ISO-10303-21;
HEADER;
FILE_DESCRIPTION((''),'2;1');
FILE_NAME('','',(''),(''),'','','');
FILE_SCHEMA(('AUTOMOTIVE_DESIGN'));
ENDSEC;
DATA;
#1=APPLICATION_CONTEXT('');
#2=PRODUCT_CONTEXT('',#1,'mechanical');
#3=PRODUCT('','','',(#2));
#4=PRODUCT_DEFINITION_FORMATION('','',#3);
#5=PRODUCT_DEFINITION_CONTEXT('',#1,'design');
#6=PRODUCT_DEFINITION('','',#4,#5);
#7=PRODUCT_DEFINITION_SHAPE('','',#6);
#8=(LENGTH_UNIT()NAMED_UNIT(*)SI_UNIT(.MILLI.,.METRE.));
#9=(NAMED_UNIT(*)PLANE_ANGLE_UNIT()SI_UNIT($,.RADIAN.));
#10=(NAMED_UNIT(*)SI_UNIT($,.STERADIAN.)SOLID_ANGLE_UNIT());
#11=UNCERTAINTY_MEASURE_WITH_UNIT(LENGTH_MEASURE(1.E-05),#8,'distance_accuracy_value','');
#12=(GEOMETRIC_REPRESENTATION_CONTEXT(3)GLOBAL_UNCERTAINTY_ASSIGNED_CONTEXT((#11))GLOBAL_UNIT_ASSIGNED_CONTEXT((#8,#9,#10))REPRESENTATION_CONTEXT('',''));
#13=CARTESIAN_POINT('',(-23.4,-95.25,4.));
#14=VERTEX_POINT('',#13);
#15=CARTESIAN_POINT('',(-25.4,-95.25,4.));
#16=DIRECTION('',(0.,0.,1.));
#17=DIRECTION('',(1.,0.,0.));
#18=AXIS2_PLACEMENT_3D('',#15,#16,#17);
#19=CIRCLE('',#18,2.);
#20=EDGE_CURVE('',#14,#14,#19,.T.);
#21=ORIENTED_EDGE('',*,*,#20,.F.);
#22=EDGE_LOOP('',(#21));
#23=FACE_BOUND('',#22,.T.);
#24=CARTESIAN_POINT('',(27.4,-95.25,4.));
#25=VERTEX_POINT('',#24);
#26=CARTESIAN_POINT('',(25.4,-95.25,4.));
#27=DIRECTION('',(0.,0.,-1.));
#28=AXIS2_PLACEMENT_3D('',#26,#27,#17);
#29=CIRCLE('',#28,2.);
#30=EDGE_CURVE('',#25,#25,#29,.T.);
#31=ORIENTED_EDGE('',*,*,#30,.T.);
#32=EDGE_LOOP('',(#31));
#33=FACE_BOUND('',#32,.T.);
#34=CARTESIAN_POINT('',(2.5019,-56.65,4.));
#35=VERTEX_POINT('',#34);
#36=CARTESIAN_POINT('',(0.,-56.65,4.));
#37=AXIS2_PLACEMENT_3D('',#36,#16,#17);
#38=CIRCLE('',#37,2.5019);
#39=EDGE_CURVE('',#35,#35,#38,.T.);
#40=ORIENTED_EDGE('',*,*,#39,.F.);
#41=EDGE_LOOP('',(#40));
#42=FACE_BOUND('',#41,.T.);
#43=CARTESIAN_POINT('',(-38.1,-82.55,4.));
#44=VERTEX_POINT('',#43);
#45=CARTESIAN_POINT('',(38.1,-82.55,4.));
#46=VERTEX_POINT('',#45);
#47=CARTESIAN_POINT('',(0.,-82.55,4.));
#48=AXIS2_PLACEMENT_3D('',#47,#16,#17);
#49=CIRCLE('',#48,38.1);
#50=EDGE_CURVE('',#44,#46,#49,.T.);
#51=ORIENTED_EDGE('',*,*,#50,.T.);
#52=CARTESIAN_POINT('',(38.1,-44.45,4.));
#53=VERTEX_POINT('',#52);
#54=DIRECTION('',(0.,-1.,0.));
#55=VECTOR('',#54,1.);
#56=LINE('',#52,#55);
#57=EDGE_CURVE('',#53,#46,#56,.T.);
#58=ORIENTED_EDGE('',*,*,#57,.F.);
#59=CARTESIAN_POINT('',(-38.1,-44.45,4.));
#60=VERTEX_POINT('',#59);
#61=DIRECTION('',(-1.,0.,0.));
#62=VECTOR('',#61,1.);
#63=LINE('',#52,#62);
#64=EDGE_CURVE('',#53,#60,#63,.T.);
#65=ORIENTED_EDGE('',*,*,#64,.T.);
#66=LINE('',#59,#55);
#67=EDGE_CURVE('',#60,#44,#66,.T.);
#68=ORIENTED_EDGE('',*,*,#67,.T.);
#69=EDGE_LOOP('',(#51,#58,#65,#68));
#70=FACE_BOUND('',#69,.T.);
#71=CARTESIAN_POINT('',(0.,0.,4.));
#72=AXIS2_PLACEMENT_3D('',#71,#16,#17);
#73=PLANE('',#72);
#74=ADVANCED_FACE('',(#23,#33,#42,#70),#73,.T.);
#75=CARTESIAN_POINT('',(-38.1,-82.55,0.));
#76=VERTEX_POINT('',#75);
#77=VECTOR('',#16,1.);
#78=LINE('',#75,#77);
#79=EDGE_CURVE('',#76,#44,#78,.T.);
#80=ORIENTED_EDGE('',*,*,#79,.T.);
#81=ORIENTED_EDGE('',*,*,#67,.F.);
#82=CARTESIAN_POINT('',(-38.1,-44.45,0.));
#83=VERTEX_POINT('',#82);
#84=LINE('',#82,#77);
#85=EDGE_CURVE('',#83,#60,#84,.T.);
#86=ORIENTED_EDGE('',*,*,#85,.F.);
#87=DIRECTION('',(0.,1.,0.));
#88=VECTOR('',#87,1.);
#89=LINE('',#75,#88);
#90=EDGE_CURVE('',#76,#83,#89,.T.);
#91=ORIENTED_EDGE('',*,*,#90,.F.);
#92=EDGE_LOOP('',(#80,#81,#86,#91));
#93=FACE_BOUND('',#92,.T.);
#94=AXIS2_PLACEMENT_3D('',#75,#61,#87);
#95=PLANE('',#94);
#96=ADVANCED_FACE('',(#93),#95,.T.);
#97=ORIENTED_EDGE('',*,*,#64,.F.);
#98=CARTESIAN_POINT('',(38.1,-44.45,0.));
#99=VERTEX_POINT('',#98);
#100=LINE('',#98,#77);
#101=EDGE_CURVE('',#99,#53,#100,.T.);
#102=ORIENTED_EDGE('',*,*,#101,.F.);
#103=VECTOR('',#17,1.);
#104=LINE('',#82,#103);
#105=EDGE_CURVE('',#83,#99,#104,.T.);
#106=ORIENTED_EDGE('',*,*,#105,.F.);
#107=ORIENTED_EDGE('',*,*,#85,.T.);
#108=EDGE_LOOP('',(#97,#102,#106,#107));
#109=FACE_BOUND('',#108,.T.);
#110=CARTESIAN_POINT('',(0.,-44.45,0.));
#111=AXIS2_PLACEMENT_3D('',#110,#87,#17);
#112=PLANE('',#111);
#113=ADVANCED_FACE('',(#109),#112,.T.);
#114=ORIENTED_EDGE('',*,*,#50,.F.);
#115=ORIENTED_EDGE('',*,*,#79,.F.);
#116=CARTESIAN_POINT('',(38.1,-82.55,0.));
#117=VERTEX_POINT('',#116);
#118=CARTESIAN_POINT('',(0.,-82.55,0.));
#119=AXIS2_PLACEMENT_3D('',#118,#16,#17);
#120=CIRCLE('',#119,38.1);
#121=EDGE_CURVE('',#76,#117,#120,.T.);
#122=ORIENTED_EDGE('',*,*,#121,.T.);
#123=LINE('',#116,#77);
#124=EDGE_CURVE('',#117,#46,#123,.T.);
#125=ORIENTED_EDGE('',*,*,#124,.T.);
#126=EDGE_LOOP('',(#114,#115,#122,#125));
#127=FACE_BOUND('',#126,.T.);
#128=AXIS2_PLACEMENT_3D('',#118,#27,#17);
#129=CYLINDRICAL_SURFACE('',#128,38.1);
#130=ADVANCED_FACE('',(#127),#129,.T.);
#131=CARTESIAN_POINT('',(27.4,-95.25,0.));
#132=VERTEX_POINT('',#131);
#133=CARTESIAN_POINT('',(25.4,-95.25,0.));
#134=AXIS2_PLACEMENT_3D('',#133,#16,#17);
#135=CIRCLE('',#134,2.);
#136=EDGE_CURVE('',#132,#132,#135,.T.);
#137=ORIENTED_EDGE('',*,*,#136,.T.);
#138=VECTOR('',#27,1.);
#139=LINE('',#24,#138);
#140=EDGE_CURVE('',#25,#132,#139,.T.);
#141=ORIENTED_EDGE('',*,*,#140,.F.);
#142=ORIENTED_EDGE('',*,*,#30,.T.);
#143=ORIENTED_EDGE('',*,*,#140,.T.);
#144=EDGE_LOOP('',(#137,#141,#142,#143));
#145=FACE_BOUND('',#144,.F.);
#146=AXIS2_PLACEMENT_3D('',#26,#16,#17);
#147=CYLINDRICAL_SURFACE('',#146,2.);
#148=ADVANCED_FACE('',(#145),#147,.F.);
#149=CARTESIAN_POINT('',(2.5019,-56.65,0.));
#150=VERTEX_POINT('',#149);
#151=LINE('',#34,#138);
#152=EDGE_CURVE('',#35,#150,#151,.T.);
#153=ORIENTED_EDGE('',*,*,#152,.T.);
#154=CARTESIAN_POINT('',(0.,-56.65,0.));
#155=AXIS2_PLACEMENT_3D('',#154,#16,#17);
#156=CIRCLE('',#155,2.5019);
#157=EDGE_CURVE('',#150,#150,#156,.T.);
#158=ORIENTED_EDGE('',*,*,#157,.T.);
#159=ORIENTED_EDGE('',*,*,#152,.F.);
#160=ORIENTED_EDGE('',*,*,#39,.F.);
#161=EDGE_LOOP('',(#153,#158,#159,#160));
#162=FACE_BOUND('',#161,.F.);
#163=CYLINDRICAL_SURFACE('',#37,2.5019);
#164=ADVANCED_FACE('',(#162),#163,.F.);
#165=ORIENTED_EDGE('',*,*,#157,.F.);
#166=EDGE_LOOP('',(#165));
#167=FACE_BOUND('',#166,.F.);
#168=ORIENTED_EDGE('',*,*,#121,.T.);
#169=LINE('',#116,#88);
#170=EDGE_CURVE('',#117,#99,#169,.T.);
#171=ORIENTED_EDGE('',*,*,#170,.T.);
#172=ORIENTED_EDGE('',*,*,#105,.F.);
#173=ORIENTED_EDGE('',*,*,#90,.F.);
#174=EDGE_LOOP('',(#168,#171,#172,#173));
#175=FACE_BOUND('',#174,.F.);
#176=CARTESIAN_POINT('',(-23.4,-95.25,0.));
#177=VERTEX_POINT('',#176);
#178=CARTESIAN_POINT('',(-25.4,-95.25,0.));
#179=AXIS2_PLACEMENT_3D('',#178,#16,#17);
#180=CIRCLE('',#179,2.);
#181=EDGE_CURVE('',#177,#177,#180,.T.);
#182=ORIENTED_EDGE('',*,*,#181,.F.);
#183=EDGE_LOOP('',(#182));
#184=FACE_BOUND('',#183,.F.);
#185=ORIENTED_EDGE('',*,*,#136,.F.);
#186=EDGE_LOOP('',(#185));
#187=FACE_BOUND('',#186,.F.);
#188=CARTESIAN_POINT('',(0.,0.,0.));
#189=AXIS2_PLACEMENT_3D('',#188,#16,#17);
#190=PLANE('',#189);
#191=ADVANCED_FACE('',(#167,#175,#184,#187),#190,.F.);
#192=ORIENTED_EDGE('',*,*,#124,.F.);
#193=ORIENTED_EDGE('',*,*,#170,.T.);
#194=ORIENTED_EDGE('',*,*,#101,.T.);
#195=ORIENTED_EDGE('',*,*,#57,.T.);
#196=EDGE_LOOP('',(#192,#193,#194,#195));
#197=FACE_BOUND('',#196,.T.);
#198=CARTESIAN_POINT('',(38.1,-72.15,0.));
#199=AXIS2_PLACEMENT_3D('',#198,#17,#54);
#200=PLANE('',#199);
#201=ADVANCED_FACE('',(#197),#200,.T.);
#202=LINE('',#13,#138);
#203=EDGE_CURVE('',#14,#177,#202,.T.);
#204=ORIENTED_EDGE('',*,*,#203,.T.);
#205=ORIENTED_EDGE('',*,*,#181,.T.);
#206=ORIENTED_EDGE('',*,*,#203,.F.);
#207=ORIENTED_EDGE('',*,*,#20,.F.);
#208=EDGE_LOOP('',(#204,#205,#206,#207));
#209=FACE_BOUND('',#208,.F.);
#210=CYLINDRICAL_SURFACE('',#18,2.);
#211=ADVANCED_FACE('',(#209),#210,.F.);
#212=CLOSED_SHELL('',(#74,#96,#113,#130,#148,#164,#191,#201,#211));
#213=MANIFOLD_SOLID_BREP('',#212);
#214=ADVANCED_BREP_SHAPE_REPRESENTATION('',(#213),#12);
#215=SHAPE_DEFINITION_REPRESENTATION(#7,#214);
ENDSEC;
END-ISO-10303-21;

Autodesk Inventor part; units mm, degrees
ref_plane "YZ Plane" through (0, 0, 0) normal (1, 0, 0) x (0, 1, 0)
ref_plane "XZ Plane" through (0, 0, 0) normal (0, 1, 0) x (-1, 0, 0)
sketch "Sketch1" plane through (0, 0, 0) normal (0, 0, 1) x (1, 0, 0)
  line L0 (6.35, -214.55) -> (43.1, -214.55) projected
  line L1 (43.1, -214.55) -> (43.1, -189.15) projected
  line L2 (43.1, -189.15) -> (40.1028, -189.15) projected
  line L3 (40.1028, -189.15) -> (40.1028, -176.45) projected
  line L4 (40.1028, -176.45) -> (43.1, -176.45) projected
  line L5 (43.1, -176.45) -> (43.1, -110.25) projected
  line L6 (43.1, -110.25) -> (40.1028, -110.25) projected
  line L7 (40.1028, -110.25) -> (40.1028, -97.55) projected
  line L8 (40.1028, -97.55) -> (43.1, -97.55) projected
  line L9 (43.1, -97.55) -> (43.1, -72.15) projected
  line L10 (43.1, -72.15) -> (35.023, -72.15) projected
  arc A0 (-35.023, -72.15) -> (35.023, -72.15) centre (0, -57.15) ccw projected
  line L11 (-35.023, -72.15) -> (-43.1, -72.15) projected
  line L12 (-43.1, -72.15) -> (-43.1, -97.55) projected
  line L13 (-43.1, -97.55) -> (-40.1028, -97.55) projected
  line L14 (-40.1028, -97.55) -> (-40.1028, -110.25) projected
  line L15 (-40.1028, -110.25) -> (-43.1, -110.25) projected
  line L16 (-43.1, -110.25) -> (-43.1, -176.45) projected
  line L17 (-43.1, -176.45) -> (-40.1028, -176.45) projected
  line L18 (-40.1028, -176.45) -> (-40.1028, -189.15) projected
  line L19 (-40.1028, -189.15) -> (-43.1, -189.15) projected
  line L20 (-43.1, -189.15) -> (-43.1, -214.55) projected
  line L21 (-43.1, -214.55) -> (-6.35, -214.55) projected
  line L22 (-11.16, -143.04) -> (-11.16, -138.135) projected
  line L23 (-11.16, -138.135) -> (10.16, -138.135) projected
  line L24 (10.16, -138.135) -> (10.16, -168.265) projected
  line L25 (10.16, -168.265) -> (-11.16, -168.265) projected
  line L26 (-11.16, -168.265) -> (-11.16, -159.55) projected
  line L27 (-11.16, -159.55) -> (-19.058, -159.55) projected
  line L28 (-19.058, -159.55) -> (-19.058, -164.622) projected
  line L29 (-19.058, -164.622) -> (-22.598, -164.622) projected
  line L30 (-22.598, -164.622) -> (-22.598, -159.55) projected
  line L31 (-22.598, -159.55) -> (-32.258, -159.55) projected
  line L32 (-32.258, -159.55) -> (-32.258, -167.805) projected
  line L33 (-32.258, -167.805) -> (-34.29, -167.805) projected
  line L34 (-34.29, -167.805) -> (-34.29, -159.55) projected
  line L35 (-34.29, -159.55) -> (-38.1, -159.55) projected
  line L36 (-38.1, -159.55) -> (-38.1, -136.69) projected
  line L37 (-38.1, -136.69) -> (-22.598, -136.69) projected
  line L38 (-22.598, -136.69) -> (-22.598, -131.618) projected
  line L39 (-22.598, -131.618) -> (-19.058, -131.618) projected
  line L40 (-19.058, -131.618) -> (-19.058, -136.69) projected
  line L41 (-19.058, -136.69) -> (-15.24, -136.69) projected
  line L42 (-15.24, -136.69) -> (-15.24, -143.04) projected
  arc A1 (-38.1, -57.15) -> (38.1, -57.15) centre (0, -57.15) ccw projected
  line L43 (0, -57.15) -> (0, -82.55)
  circle A2 centre (0, -82.55) radius 38.1
  line L44 (38.1, -82.55) -> (-38.1, -82.55)
  line L45 (-38.1, -82.55) -> (-38.1, -44.45)
  line L46 (-38.1, -44.45) -> (38.1, -44.45)
  line L47 (38.1, -44.45) -> (38.1, -82.55)
  circle A3 centre (25.4, -95.25) radius 1.5 projected
  circle A4 centre (-25.4, -95.25) radius 1.5 projected
  line L48 (-15.24, -143.04) -> (-11.16, -143.04) projected
  line L49 (-6.35, -214.55) -> (-6.35, -203.8154) projected
  line L50 (-6.35, -203.8154) -> (6.35, -203.8154) projected
  line L51 (6.35, -203.8154) -> (6.35, -214.55) projected
  point P0 (0, 0)
  dimension "d1" = 76.2
  dimension "d0" = 25.4
extrude "Extrusion1" add sketch "Sketch1" along normal blind 4 contours L47 A2 L10 | L10 A2 A1 L47 | A2 L44 A0 L10 | L10 A1 A2 | A1 A2 L46 L47 | A2 L44 A0 | A0 L44 A1 A2 | L45 L11 A2 | A2 L11 A0 L44 | A0 L44 | A2 A1 L45 L46 | A2 A1 L11 | L11 L45 A1 A2 | A3 | A4
ref_plane "Work Plane1" through (0, -135.7786, 0) normal (0, 0, 1) x (1, 0, 0)
sketch "Sketch2" plane through (0, 0, 4) normal (0, 0, 1) x (1, 0, 0)
  line L0 (-40.1, -31.75) -> (-43.1, -31.75) projected
  line L1 (-43.1, -31.75) -> (-43.1, -57.15) projected
  line L2 (-43.1, -57.15) -> (-38.1, -57.15) projected
  arc A0 (-38.1, -57.15) -> (38.1, -57.15) centre (0, -57.15) ccw projected
  line L3 (38.1, -57.15) -> (43.1, -57.15) projected
  line L4 (43.1, -57.15) -> (43.1, -31.75) projected
  line L5 (43.1, -31.75) -> (40.1, -31.75) projected
  line L6 (40.1, -31.75) -> (40.1, -19.05) projected
  line L7 (40.1, -19.05) -> (43.1, -19.05) projected
  line L8 (43.1, -19.05) -> (43.1, 24.05) projected
  line L9 (43.1, 24.05) -> (40.1, 24.05) projected
  line L10 (40.1, 24.05) -> (40.1, 36.75) projected
  line L11 (40.1, 36.75) -> (43.1, 36.75) projected
  line L12 (43.1, 36.75) -> (43.1, 62.15) projected
  line L13 (14, 62.15) -> (-14, 62.15) projected
  line L14 (-43.1, 62.15) -> (-43.1, 36.75) projected
  line L15 (-43.1, 36.75) -> (-40.1, 36.75) projected
  line L16 (-40.1, 36.75) -> (-40.1, 24.05) projected
  line L17 (-40.1, 24.05) -> (-43.1, 24.05) projected
  line L18 (-43.1, 24.05) -> (-43.1, -19.05) projected
  line L19 (-43.1, -19.05) -> (-40.1, -19.05) projected
  line L20 (-40.1, -19.05) -> (-40.1, -31.75) projected
  line L21 (15.24, -5.55) -> (11.16, -5.55) projected
  line L22 (11.16, -5.55) -> (11.16, -14.265) projected
  line L23 (11.16, -14.265) -> (-10.16, -14.265) projected
  line L24 (-10.16, -14.265) -> (-10.16, 15.865) projected
  line L25 (-10.16, 15.865) -> (11.16, 15.865) projected
  line L26 (11.16, 15.865) -> (11.16, 7.15) projected
  line L27 (11.16, 7.15) -> (19.058, 7.15) projected
  line L28 (22.598, 7.15) -> (32.266, 7.15) projected
  line L29 (32.266, 7.15) -> (32.266, 15.405) projected
  line L30 (32.266, 15.405) -> (34.282, 15.405) projected
  line L31 (34.282, 15.405) -> (34.282, 7.15) projected
  line L32 (34.282, 7.15) -> (38.1, 7.15) projected
  line L33 (38.1, 7.15) -> (38.1, -15.71) projected
  line L34 (38.1, -15.71) -> (22.598, -15.71) projected
  line L35 (19.058, -15.71) -> (15.24, -15.71) projected
  line L36 (15.24, -15.71) -> (15.24, -5.55) projected
  line L37 (19.058, 7.15) -> (19.058, 12.222) projected
  line L38 (19.058, 12.222) -> (22.598, 12.222) projected
  line L39 (22.598, 12.222) -> (22.598, 7.15) projected
  line L40 (22.598, -15.71) -> (22.598, -20.782) projected
  line L41 (22.598, -20.782) -> (19.058, -20.782) projected
  line L42 (19.058, -20.782) -> (19.058, -15.71) projected
  line L43 (-14, 62.15) -> (-14, 31.5) projected
  line L44 (-14, 31.5) -> (-30.4, 31.5) projected
  line L45 (-30.4, 31.5) -> (-30.4, 62.15) projected
  line L46 (-30.4, 62.15) -> (-43.1, 62.15) projected
  line L47 (43.1, 62.15) -> (30.4, 62.15) projected
  line L48 (30.4, 62.15) -> (30.4, 31.5) projected
  line L49 (30.4, 31.5) -> (14, 31.5) projected
  line L50 (14, 31.5) -> (14, 62.15) projected
  line L51 (0, -57.15) -> (0, -56.65)
  circle A1 centre (0, -56.65) radius 2.5019
  point P0 (0, 0)
  dimension "d13" = 0.5
  dimension "d14" = 5.0038
extrude "Extrusion2" cut sketch "Sketch2" against normal blind 4 contours A1
sketch "Sketch3" plane through (0, 0, 4) normal (0, 0, 1) x (1, 0, 0)
  arc A0 (-35.023, -72.15) -> (35.023, -72.15) centre (0, -57.15) ccw projected
  line L0 (-6.35, -214.55) -> (-6.35, -203.8154) projected
  line L1 (-6.35, -203.8154) -> (6.35, -203.8154) projected
  line L2 (6.35, -203.8154) -> (6.35, -214.55) projected
  line L3 (6.35, -214.55) -> (43.1, -214.55) projected
  line L4 (43.1, -214.55) -> (43.1, -189.15) projected
  line L5 (43.1, -189.15) -> (40.1028, -189.15) projected
  line L6 (40.1028, -189.15) -> (40.1028, -176.45) projected
  line L7 (40.1028, -176.45) -> (43.1, -176.45) projected
  line L8 (43.1, -176.45) -> (43.1, -110.25) projected
  line L9 (43.1, -110.25) -> (40.1028, -110.25) projected
  line L10 (40.1028, -110.25) -> (40.1028, -97.55) projected
  line L11 (40.1028, -97.55) -> (43.1, -97.55) projected
  line L12 (43.1, -97.55) -> (43.1, -72.15) projected
  line L13 (43.1, -72.15) -> (35.023, -72.15) projected
  arc A1 (-35.023, -72.15) -> (35.023, -72.15) centre (0, -57.15) ccw projected
  line L14 (-35.023, -72.15) -> (-43.1, -72.15) projected
  line L15 (-43.1, -72.15) -> (-43.1, -97.55) projected
  line L16 (-43.1, -97.55) -> (-40.1028, -97.55) projected
  line L17 (-40.1028, -97.55) -> (-40.1028, -110.25) projected
  line L18 (-40.1028, -110.25) -> (-43.1, -110.25) projected
  line L19 (-43.1, -110.25) -> (-43.1, -176.45) projected
  line L20 (-43.1, -176.45) -> (-40.1028, -176.45) projected
  line L21 (-40.1028, -176.45) -> (-40.1028, -189.15) projected
  line L22 (-40.1028, -189.15) -> (-43.1, -189.15) projected
  line L23 (-43.1, -189.15) -> (-43.1, -214.55) projected
  line L24 (-43.1, -214.55) -> (-6.35, -214.55) projected
  line L25 (-11.16, -143.04) -> (-11.16, -138.135) projected
  line L26 (-11.16, -138.135) -> (10.16, -138.135) projected
  line L27 (10.16, -138.135) -> (10.16, -168.265) projected
  line L28 (10.16, -168.265) -> (-11.16, -168.265) projected
  line L29 (-11.16, -168.265) -> (-11.16, -159.55) projected
  line L30 (-11.16, -159.55) -> (-19.058, -159.55) projected
  line L31 (-19.058, -159.55) -> (-19.058, -164.622) projected
  line L32 (-19.058, -164.622) -> (-22.598, -164.622) projected
  line L33 (-22.598, -164.622) -> (-22.598, -159.55) projected
  line L34 (-22.598, -159.55) -> (-32.258, -159.55) projected
  line L35 (-32.258, -159.55) -> (-32.258, -167.805) projected
  line L36 (-32.258, -167.805) -> (-34.29, -167.805) projected
  line L37 (-34.29, -167.805) -> (-34.29, -159.55) projected
  line L38 (-34.29, -159.55) -> (-38.1, -159.55) projected
  line L39 (-38.1, -159.55) -> (-38.1, -136.69) projected
  line L40 (-38.1, -136.69) -> (-22.598, -136.69) projected
  line L41 (-22.598, -136.69) -> (-22.598, -131.618) projected
  line L42 (-22.598, -131.618) -> (-19.058, -131.618) projected
  line L43 (-19.058, -131.618) -> (-19.058, -136.69) projected
  line L44 (-19.058, -136.69) -> (-15.24, -136.69) projected
  line L45 (-15.24, -136.69) -> (-15.24, -143.04) projected
  arc A2 (-38.1, -82.55) -> (38.1, -82.55) centre (0, -82.55) ccw projected
  line L46 (38.1, -82.55) -> (38.1, -44.45) projected
  line L47 (38.1, -44.45) -> (-38.1, -44.45) projected
  line L48 (-38.1, -44.45) -> (-38.1, -82.55) projected
  line L49 (0, -95.25) -> (25.4, -95.25)
  line L50 (25.4, -95.25) -> (-25.4, -95.25)
  circle A3 centre (25.4, -95.25) radius 2
  circle A4 centre (-25.4, -95.25) radius 2
  circle A5 centre (25.4, -95.25) radius 1.5 projected
  circle A6 centre (-25.4, -95.25) radius 1.5 projected
  line L51 (-15.24, -143.04) -> (-11.16, -143.04) projected
  point P0 (0, 0)
  dimension "d7" = 25.4
  dimension "d8" = 50.8
  dimension "d9" = 4
  dimension "d10" = 4
extrude "Extrusion3" cut sketch "Sketch3" against normal blind 25.4 contours A3 | A4 | A5 | A6
properties part number "LargeConnectorBodies"
